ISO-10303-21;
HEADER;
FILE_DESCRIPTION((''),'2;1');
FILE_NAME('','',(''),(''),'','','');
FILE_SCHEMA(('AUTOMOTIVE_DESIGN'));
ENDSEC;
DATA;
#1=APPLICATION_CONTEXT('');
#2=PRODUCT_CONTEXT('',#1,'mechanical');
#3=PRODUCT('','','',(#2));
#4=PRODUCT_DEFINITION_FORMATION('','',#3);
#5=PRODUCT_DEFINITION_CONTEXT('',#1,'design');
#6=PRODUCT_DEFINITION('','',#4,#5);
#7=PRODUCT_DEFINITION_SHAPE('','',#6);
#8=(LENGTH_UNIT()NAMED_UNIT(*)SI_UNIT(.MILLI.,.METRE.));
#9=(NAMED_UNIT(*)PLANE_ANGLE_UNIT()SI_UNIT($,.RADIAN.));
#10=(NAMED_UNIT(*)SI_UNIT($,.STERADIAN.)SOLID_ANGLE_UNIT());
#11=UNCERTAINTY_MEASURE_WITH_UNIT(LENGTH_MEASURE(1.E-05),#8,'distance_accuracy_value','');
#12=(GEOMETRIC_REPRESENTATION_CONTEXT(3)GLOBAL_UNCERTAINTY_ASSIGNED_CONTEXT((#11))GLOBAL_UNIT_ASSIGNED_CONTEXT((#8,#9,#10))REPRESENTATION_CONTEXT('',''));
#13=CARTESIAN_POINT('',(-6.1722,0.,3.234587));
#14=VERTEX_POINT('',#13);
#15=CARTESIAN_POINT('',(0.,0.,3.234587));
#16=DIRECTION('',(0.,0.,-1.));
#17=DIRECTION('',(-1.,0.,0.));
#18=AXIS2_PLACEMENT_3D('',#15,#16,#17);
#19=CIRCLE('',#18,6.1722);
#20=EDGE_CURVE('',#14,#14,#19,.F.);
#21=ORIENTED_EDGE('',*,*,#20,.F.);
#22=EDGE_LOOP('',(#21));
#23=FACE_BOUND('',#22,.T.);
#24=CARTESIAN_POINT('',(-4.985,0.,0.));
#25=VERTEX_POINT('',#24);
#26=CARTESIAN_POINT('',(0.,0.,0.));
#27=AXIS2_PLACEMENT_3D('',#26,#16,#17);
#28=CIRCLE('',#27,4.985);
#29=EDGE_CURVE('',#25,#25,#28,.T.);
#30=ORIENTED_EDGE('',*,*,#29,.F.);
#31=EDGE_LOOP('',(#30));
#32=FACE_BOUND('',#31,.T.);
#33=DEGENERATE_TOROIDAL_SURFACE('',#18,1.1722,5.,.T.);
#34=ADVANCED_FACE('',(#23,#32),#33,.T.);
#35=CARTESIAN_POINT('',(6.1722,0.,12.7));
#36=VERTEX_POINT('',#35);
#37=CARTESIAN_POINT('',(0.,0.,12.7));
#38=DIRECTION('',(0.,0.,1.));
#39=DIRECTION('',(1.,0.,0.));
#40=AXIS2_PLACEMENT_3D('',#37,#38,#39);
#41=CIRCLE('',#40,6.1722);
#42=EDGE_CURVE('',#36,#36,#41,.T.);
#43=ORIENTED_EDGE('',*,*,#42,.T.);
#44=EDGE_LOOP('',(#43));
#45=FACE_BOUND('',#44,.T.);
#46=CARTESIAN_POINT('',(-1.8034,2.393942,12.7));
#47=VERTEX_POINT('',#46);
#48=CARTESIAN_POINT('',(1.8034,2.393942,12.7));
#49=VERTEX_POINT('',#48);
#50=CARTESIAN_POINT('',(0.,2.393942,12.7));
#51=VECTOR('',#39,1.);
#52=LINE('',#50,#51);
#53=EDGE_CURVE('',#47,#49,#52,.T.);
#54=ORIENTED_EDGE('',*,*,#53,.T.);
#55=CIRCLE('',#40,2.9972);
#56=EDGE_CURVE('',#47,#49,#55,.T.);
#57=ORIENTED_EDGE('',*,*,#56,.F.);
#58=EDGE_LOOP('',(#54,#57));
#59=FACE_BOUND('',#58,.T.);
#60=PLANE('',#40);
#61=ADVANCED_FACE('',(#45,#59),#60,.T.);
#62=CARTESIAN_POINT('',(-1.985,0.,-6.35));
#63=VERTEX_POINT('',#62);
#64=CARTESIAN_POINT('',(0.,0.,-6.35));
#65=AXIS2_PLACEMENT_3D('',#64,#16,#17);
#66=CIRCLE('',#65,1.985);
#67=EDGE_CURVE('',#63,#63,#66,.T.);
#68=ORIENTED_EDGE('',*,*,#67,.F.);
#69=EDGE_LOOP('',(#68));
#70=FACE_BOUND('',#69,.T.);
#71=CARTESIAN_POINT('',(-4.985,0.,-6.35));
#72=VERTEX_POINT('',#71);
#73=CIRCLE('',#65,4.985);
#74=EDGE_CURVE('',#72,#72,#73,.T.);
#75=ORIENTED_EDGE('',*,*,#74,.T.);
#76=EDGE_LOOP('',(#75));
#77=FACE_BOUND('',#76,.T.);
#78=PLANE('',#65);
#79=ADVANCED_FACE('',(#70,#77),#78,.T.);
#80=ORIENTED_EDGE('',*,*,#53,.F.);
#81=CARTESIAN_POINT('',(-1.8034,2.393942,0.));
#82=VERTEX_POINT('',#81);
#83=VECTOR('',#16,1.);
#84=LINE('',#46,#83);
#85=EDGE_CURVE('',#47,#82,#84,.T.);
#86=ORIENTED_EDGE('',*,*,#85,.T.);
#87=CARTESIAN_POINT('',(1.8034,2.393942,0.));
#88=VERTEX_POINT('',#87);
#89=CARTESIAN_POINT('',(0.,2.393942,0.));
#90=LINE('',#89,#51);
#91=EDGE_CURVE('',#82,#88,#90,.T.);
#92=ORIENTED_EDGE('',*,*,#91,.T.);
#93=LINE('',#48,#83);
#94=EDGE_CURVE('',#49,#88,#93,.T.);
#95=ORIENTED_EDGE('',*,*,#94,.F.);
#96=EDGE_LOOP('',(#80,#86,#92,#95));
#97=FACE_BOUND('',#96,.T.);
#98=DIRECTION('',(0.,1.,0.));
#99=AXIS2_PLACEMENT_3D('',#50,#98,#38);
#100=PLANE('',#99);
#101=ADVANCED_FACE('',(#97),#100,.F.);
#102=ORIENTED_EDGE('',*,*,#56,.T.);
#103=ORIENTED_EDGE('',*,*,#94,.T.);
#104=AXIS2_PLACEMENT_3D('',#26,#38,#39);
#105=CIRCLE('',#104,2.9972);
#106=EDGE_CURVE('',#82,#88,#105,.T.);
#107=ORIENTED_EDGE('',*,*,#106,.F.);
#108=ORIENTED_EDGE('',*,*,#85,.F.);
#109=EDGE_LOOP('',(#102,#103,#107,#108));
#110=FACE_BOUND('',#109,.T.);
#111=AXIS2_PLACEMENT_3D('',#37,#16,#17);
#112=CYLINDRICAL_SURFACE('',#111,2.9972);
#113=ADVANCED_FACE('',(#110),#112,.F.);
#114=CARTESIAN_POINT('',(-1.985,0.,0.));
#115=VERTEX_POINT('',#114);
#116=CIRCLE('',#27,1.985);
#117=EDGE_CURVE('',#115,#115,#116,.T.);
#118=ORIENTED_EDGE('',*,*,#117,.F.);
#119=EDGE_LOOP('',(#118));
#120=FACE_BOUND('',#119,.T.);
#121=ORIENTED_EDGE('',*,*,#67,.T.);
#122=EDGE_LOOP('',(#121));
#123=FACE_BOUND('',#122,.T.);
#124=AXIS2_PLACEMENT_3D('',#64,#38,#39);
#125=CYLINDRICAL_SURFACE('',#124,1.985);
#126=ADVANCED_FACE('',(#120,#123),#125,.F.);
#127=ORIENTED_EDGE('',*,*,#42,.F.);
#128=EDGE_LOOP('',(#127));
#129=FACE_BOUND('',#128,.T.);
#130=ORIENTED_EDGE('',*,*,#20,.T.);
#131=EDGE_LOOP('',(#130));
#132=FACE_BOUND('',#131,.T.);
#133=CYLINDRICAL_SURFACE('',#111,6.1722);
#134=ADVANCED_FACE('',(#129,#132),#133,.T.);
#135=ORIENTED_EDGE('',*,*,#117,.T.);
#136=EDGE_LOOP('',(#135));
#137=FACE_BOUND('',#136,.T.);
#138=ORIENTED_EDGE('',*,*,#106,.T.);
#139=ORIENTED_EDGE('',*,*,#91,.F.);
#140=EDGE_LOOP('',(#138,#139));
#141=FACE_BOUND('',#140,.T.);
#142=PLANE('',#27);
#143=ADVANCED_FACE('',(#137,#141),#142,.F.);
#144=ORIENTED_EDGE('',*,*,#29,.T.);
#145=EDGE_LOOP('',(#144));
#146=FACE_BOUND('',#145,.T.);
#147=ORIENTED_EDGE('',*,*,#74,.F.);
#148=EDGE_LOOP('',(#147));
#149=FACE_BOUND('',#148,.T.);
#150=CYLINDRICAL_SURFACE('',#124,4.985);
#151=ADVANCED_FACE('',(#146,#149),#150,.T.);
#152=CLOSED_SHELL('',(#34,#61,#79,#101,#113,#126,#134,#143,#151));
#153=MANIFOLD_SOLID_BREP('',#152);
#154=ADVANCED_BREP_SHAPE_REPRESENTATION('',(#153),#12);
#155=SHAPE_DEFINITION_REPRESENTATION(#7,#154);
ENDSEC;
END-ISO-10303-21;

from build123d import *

# Parameters (mm, degrees)
SKETCH1_R           = 6.1722
BOSS_EXTRUDE1_DEPTH = 12.7
SKETCH2_R           = 4.985
SKETCH2_R_2         = 1.985
BOSS_EXTRUDE2_DEPTH = 6.35
FILLET1_R           = 5


with BuildPart() as part:
    # Sketch1 → Boss-Extrude1 (new body)
    with BuildSketch(Plane.XY):
        Circle(SKETCH1_R)
        with BuildLine():
            Line((-1.8034, 2.393941578), (1.8034, 2.393941578))
            ThreePointArc((1.8034, 2.393941578), (0, -2.9972), (-1.8034, 2.393941578))
        make_face(mode=Mode.SUBTRACT)
    extrude(amount=BOSS_EXTRUDE1_DEPTH)

    # Sketch2 → Boss-Extrude2 (add)
    with BuildSketch(Plane(origin=(0, 0, 0), x_dir=(-1, 0, 0), z_dir=(0, 0, -1))):
        Circle(SKETCH2_R)
        Circle(SKETCH2_R_2, mode=Mode.SUBTRACT)
    extrude(amount=BOSS_EXTRUDE2_DEPTH)

    # Fillet1
    # the kernel refuses this fillet: 5 mm, written as the material it takes off along each edge
    with BuildSketch(Plane(origin=(0, 0, 0), x_dir=(1, 0, 0), z_dir=(0, -1, 0))) as fillet1_piece_1_section:
        with BuildLine():
            CenterArc((1.1722, 3.234587479), FILLET1_R, 319.690404577, 40.309595423)
            Line((4.985, 0), (5.061256, -0.06469175))
            ThreePointArc((5.061256, -0.06469175), (5.5786, -0.1), (6.1722, -0.1))
            Line((6.1722, -0.1), (6.2722, 0))
            Line((6.2722, 0), (6.2722, 3.234587479))
            Line((6.2722, 3.234587479), (6.1722, 3.234587479))
        make_face()
    fillet1_piece_1 = revolve(axis=Axis((0, 0, 0), (0, 0, 1)), mode=Mode.PRIVATE)
    fillet1_piece_1 = fillet1_piece_1 - Plane(origin=(0, 0, 1.498233037), x_dir=(-1, 0, 0), z_dir=(0, 0, 1)) * Cylinder(4.985, 26, mode=Mode.PRIVATE)
    add(fillet1_piece_1, mode=Mode.SUBTRACT)


solid = part.part
